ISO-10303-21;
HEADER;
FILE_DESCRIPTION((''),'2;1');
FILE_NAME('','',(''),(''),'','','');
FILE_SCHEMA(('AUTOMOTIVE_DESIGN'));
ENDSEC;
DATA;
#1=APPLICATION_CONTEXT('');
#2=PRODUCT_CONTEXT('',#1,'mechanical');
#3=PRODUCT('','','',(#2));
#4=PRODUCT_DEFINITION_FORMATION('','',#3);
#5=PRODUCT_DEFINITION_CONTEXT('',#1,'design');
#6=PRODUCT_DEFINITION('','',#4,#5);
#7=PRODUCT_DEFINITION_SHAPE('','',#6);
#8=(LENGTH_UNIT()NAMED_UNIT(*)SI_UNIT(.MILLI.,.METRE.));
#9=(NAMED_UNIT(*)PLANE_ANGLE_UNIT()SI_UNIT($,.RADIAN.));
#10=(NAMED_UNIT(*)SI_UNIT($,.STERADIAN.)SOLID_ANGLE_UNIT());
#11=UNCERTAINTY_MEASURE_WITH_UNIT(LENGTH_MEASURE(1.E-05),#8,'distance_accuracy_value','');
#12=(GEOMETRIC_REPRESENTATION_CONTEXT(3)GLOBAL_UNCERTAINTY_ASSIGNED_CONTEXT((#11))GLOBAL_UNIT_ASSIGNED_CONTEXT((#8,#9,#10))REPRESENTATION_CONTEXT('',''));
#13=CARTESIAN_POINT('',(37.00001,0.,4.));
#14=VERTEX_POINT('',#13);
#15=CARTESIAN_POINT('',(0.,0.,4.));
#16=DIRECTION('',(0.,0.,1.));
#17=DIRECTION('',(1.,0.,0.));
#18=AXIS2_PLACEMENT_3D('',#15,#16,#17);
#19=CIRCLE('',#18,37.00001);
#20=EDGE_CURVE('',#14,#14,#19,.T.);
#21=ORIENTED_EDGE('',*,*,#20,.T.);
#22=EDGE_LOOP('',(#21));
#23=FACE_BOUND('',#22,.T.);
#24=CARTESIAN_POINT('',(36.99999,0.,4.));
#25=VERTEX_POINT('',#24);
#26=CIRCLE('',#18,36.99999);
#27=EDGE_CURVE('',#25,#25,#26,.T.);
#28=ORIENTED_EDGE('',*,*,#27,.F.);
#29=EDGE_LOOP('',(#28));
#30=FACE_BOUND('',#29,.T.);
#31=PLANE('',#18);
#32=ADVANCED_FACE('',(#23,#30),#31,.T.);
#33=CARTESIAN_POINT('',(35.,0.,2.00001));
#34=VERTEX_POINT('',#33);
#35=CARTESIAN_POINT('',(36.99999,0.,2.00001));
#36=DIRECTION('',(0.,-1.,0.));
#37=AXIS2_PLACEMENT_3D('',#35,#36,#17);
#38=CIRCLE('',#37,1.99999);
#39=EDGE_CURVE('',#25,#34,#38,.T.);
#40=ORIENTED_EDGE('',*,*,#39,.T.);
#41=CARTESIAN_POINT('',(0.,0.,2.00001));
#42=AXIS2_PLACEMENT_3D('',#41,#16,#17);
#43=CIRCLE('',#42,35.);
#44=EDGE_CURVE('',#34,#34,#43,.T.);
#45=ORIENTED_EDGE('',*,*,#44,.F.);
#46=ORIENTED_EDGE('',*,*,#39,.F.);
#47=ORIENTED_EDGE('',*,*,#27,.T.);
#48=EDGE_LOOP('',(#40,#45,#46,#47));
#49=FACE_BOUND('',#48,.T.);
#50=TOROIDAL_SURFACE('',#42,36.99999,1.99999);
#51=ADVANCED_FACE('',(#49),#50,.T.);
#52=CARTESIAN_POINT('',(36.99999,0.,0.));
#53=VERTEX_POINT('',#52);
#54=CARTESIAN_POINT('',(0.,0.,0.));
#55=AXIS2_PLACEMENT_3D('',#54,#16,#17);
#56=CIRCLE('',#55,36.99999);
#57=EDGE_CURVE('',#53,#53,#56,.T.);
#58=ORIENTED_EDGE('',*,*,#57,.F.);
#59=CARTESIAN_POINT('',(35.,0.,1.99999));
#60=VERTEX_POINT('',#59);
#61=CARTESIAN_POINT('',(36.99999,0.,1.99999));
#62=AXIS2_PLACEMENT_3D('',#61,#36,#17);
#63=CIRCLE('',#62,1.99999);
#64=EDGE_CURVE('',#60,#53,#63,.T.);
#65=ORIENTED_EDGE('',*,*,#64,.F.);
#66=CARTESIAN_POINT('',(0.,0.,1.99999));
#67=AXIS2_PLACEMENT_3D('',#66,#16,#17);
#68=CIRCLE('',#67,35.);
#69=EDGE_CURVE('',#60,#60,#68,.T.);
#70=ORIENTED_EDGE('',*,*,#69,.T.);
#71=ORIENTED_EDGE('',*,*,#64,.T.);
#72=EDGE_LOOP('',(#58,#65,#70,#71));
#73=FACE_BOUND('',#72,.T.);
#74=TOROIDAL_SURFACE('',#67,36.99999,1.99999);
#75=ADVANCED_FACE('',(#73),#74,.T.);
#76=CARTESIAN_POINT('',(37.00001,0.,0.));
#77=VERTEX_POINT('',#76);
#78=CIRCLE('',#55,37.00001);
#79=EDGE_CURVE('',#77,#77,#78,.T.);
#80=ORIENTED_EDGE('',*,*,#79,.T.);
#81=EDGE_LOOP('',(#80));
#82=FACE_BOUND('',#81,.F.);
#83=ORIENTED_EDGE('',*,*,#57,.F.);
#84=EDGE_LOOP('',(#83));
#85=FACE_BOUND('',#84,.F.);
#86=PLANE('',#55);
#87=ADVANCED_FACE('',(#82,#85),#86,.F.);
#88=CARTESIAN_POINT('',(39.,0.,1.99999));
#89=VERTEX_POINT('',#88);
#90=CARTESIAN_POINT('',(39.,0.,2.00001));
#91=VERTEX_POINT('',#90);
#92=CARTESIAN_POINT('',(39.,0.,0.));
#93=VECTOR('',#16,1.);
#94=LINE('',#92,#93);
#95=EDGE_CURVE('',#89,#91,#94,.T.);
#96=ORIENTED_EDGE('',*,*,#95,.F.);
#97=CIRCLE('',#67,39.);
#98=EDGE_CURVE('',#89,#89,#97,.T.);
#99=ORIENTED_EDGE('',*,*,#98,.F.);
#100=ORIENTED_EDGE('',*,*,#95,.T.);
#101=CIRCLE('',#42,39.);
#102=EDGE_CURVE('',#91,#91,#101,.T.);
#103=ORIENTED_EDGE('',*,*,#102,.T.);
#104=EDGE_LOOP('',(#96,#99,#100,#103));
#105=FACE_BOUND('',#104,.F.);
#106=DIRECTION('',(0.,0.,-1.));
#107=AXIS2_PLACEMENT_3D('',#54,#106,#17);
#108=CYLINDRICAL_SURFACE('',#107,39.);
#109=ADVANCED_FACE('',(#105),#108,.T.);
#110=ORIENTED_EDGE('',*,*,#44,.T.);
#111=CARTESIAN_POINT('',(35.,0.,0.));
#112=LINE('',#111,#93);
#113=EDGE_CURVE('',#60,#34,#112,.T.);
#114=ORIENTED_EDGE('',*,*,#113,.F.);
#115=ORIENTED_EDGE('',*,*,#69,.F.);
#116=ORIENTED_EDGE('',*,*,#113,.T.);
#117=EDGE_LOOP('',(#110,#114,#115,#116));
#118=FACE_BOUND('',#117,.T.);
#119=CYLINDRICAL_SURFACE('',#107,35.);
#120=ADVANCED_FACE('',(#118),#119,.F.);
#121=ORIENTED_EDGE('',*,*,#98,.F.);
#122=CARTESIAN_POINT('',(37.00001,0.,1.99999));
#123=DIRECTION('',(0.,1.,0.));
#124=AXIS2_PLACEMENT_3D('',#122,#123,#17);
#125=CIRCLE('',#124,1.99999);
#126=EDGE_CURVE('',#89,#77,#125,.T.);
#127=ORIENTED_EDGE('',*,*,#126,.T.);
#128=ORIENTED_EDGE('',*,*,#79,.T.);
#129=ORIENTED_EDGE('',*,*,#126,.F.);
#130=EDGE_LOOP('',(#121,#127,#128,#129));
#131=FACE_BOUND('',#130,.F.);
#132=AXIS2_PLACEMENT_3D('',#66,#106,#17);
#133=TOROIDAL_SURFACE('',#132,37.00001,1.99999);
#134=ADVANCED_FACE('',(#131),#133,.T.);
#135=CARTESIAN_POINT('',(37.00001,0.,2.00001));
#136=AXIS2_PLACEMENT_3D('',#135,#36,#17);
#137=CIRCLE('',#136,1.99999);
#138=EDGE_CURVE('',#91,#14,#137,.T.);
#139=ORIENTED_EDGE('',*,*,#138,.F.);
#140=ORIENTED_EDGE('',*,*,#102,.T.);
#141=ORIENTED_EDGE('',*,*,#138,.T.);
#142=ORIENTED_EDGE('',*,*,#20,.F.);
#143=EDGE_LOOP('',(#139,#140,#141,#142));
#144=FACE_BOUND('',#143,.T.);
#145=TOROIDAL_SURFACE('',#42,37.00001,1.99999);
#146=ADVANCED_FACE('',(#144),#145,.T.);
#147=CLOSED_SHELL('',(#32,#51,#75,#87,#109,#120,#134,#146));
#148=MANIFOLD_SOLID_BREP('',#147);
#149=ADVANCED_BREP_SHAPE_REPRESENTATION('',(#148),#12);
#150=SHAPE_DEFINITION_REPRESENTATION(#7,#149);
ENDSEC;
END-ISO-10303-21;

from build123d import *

# Parameters (mm, degrees)
F0_R     = 39
F0_R_2   = 35
F1_DEPTH = 4
F2_R     = 1.99999
F3_R     = 1.99999


# Not quite as in the source:
# - a fillet or chamfer is up to 0.001 mm smaller than in the source, because OpenCascade refuses the exact size


with BuildPart() as f1:
    # F0 (on Top) → F1 (new body)
    with BuildSketch(Plane.XY):
        Circle(F0_R)
        Circle(F0_R_2, mode=Mode.SUBTRACT)
    extrude(amount=F1_DEPTH)

    # F2 (radius 2 in the source; OpenCascade refuses exactly that, so slightly less here)
    f2_edges = [f1.edges().sort_by_distance(p)[0] for p in [
        (-39, 0, 0),
        (-35, 0, 0),
    ]]
    fillet(f2_edges, radius=F2_R)

    # F3 (radius 2 in the source; OpenCascade refuses exactly that, so slightly less here)
    f3_edges = [f1.edges().sort_by_distance(p)[0] for p in [
        (-39, 0, 4),
        (-35, 0, 4),
    ]]
    fillet(f3_edges, radius=F3_R)


solid = f1.part
